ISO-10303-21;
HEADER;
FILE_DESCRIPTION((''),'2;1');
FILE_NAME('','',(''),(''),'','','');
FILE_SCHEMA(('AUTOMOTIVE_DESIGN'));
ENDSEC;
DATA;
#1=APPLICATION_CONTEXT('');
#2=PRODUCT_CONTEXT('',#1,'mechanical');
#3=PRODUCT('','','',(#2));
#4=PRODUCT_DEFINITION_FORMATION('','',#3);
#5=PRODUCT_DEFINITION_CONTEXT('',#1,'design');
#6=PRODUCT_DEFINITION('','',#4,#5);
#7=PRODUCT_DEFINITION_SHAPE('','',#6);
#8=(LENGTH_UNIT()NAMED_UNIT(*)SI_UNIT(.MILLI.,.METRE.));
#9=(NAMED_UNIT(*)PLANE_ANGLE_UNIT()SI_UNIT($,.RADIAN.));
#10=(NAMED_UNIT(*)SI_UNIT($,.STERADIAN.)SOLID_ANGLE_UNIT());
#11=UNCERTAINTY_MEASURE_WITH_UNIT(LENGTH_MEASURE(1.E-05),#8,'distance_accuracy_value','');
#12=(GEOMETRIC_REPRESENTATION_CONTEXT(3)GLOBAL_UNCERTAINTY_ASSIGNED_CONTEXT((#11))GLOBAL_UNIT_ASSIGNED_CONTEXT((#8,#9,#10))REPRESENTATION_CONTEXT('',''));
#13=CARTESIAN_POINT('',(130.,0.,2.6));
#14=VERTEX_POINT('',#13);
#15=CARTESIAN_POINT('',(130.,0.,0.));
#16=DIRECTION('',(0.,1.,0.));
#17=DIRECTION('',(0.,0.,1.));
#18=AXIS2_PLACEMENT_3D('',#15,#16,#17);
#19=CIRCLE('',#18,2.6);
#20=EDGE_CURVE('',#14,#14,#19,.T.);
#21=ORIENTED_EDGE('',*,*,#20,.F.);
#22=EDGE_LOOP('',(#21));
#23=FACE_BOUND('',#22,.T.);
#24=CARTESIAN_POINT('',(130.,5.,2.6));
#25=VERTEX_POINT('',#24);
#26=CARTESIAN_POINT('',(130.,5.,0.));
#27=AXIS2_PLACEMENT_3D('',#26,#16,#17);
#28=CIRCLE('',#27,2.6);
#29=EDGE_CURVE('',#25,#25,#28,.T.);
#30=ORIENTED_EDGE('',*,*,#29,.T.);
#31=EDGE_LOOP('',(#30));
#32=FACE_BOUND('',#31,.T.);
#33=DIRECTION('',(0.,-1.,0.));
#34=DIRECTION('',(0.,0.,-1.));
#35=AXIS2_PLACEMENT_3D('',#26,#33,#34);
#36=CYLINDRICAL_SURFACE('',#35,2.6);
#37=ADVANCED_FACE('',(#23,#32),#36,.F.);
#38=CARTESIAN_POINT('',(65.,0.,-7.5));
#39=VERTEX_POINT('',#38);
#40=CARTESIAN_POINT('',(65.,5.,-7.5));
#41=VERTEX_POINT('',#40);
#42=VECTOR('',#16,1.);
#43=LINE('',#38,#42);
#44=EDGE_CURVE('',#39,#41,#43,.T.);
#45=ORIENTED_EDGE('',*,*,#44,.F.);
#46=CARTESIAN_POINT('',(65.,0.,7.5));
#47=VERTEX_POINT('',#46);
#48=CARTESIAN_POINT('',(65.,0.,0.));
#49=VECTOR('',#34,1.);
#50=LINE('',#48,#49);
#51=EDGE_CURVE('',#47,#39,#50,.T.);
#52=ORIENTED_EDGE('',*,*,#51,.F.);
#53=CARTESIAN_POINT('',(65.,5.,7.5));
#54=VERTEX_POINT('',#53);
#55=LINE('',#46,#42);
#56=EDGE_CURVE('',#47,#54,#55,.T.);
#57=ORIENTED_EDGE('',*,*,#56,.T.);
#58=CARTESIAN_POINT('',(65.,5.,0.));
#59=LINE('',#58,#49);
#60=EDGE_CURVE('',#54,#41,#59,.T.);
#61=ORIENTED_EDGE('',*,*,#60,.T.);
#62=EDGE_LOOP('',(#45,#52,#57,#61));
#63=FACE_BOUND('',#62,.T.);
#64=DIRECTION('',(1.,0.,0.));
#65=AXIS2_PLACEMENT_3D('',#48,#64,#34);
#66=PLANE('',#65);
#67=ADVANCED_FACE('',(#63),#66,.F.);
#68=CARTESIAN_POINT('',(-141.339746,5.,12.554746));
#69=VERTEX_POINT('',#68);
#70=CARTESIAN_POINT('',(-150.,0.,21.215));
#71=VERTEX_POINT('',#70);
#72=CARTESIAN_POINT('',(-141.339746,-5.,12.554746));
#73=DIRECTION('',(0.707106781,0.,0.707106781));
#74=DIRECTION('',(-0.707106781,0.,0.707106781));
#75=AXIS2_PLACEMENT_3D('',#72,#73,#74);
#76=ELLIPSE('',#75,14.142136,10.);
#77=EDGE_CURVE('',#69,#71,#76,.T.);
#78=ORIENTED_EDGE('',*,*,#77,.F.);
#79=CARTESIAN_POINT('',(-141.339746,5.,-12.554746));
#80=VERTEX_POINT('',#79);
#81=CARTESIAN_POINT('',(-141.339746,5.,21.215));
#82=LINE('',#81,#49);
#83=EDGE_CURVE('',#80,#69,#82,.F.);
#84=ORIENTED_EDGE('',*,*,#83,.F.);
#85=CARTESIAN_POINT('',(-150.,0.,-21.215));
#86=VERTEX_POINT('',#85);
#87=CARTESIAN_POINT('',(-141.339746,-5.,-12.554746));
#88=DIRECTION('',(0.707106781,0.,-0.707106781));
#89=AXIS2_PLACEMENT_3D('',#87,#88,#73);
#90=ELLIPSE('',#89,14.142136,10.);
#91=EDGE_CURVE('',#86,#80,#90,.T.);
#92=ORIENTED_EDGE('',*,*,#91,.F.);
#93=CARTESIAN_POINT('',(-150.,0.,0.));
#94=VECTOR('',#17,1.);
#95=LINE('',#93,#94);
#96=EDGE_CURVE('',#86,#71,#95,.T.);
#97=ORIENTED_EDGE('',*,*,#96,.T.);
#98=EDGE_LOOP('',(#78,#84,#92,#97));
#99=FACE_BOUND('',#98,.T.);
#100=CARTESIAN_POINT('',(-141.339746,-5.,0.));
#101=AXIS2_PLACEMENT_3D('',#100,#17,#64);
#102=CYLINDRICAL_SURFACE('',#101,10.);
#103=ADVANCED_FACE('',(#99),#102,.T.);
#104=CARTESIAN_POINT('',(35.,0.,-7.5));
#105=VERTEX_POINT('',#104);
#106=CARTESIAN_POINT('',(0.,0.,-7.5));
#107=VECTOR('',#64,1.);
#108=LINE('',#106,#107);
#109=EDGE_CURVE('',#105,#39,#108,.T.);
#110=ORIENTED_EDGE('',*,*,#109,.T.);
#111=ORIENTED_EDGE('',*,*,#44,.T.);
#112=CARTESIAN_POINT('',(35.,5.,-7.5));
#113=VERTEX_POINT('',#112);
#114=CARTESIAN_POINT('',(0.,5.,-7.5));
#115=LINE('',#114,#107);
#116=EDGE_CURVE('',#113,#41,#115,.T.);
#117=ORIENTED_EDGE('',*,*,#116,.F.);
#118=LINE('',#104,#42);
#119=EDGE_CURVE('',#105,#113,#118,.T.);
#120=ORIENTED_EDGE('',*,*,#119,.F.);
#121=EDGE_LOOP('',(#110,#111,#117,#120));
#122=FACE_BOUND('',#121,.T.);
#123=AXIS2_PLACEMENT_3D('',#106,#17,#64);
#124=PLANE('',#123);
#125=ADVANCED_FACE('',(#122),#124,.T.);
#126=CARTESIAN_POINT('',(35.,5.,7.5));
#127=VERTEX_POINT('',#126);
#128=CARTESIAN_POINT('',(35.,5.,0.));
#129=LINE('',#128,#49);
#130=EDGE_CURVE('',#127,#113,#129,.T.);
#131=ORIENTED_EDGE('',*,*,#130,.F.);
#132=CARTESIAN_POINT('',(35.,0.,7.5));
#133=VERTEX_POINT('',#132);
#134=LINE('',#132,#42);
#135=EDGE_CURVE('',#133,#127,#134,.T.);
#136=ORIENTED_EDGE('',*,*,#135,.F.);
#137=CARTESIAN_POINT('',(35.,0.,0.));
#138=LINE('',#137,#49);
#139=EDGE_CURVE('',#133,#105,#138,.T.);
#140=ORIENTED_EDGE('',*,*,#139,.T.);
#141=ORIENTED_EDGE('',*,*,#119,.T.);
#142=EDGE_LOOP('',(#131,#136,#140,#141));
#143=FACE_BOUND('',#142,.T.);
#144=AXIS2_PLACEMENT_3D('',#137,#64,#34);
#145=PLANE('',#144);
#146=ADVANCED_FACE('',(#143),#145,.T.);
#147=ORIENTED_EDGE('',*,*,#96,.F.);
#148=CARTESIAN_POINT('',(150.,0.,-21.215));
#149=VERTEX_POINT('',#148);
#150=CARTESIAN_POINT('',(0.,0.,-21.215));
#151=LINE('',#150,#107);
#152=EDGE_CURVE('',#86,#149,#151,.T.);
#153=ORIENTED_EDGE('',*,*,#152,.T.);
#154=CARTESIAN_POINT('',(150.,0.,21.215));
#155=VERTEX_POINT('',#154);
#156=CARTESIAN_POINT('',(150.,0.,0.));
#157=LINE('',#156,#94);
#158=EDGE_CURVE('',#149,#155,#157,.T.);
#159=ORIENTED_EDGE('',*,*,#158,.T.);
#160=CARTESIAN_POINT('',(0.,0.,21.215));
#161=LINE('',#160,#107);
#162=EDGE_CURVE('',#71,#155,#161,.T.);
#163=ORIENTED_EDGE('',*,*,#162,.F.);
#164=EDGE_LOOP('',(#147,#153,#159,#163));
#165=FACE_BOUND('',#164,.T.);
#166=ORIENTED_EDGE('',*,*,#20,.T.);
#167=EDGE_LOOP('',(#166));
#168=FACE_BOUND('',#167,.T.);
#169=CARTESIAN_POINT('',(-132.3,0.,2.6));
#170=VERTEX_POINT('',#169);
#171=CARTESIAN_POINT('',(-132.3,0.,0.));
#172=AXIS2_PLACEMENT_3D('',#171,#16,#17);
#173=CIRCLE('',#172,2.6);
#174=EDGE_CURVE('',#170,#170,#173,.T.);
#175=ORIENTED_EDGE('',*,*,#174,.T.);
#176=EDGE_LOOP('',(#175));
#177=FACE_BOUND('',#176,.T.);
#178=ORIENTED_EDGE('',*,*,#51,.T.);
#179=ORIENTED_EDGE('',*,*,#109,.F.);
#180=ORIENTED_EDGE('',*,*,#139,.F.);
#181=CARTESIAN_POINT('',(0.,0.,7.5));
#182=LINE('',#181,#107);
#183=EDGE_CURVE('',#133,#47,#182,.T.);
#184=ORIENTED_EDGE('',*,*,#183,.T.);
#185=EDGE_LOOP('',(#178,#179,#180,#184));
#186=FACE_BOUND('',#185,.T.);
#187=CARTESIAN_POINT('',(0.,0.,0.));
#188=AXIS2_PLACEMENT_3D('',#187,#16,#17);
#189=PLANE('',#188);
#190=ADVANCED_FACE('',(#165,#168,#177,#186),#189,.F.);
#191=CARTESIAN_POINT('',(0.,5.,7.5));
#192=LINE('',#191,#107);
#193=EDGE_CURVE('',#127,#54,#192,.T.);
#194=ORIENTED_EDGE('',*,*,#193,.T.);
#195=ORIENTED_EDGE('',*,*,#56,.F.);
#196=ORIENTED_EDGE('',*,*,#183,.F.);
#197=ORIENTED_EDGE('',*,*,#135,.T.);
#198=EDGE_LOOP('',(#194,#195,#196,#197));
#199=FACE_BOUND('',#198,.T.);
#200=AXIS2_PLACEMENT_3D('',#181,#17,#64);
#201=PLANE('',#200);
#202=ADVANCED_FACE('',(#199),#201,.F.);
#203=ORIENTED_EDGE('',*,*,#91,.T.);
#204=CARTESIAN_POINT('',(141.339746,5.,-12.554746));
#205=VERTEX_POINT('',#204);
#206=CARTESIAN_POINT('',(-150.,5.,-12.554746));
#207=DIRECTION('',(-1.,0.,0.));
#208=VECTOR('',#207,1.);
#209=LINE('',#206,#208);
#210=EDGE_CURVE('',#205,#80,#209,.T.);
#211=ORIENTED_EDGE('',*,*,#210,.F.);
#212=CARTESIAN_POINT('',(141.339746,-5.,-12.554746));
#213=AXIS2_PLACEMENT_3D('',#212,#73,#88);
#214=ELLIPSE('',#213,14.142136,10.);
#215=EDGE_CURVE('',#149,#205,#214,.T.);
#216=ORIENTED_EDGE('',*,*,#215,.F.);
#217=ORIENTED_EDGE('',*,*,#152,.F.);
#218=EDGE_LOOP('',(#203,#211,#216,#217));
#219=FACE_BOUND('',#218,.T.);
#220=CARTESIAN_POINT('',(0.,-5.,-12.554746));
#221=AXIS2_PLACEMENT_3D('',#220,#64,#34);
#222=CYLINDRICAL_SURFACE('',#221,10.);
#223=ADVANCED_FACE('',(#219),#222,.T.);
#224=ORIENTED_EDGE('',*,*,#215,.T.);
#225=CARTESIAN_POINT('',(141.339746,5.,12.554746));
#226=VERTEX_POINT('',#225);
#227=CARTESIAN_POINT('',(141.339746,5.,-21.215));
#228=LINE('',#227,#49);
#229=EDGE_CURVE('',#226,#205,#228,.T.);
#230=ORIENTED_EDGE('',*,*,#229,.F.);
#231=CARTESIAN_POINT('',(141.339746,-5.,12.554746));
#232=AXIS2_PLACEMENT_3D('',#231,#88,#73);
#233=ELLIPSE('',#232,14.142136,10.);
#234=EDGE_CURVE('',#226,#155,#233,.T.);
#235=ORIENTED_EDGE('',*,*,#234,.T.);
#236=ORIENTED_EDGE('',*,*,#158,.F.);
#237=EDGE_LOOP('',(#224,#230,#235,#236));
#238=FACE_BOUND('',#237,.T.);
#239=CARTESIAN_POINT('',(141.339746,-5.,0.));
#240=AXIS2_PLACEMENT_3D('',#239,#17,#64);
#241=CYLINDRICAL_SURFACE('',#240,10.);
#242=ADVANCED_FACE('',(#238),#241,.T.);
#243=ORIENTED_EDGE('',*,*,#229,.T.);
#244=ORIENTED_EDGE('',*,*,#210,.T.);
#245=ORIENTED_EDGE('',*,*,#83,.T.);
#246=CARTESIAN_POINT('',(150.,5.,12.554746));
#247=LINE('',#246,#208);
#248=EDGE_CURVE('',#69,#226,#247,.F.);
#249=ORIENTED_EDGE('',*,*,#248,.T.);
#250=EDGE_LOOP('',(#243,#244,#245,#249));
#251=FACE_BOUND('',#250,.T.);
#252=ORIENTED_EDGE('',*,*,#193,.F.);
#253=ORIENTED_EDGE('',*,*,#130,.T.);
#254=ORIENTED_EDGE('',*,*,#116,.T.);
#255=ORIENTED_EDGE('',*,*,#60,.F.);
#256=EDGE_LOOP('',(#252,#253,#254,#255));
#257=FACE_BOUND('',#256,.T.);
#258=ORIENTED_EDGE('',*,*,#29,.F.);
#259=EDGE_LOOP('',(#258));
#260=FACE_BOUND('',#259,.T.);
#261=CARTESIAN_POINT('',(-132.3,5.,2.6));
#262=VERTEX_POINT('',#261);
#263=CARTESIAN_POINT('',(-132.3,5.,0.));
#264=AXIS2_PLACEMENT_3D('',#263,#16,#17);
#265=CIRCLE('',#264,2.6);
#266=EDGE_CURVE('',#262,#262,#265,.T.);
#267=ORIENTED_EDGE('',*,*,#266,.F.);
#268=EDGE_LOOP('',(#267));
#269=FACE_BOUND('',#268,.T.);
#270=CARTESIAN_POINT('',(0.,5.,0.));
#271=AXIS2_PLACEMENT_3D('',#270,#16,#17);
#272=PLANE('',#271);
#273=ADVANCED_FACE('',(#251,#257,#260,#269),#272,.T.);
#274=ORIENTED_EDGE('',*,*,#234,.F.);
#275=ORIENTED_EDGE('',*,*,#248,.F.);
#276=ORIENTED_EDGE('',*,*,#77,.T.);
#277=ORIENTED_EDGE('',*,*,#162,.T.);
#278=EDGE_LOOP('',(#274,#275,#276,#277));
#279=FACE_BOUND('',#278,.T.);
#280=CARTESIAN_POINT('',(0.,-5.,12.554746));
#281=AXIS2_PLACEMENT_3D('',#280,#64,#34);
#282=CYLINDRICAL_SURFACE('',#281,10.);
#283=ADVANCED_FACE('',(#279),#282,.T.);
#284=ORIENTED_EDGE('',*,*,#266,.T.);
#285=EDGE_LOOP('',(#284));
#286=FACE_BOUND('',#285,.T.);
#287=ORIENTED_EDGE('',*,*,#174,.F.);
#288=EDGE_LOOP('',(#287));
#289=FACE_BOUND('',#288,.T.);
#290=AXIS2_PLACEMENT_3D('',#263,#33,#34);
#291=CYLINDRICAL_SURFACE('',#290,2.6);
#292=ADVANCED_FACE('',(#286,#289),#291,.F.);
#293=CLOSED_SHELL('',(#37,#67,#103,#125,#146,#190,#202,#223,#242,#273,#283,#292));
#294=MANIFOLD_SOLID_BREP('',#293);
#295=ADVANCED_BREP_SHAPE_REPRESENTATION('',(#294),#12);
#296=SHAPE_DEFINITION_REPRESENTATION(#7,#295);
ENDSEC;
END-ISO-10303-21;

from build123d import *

# Parameters (mm, degrees)
SKETCH_1_W          = 21
SKETCH_1_H          = 42.43
SKETCH_1_R          = 2.6
EXTRUDE_1_DEPTH     = 5
FILLET_1_R          = 10
SKETCH_3_W          = 30
SKETCH_3_H          = 7.5
CUT_EXTRUDE_2_DEPTH = 5


with BuildPart() as part:
    # 草图1 → 凸台-拉伸1 (new body)
    # profile 1 of 3: a face of its own
    with BuildSketch(Plane(origin=(0, 0, 0), x_dir=(1, 0, 0), z_dir=(0, 1, 0))):
        with Locations((-139.5, 0)):
            Rectangle(SKETCH_1_W, SKETCH_1_H)
        with Locations(Location((-132.3, 0, 0), (0, 0, 270))):
            Circle(SKETCH_1_R, mode=Mode.SUBTRACT)
    # profile 2 of 3: a face of its own
    with BuildSketch(Plane(origin=(0, 0, 0), x_dir=(1, 0, 0), z_dir=(0, 1, 0))):
        with BuildLine():
            Line((129, 21.215), (-129, 21.215))
            Line((-129, 21.215), (-129, -21.215))
            Line((-129, -21.215), (129, -21.215))
            Line((129, -21.215), (129, -2.4))
            ThreePointArc((129, -2.4), (127.4, 0), (129, 2.4))
            Line((129, 2.4), (129, 21.215))
        make_face()
    # profile 3 of 3: a face of its own
    with BuildSketch(Plane(origin=(0, 0, 0), x_dir=(1, 0, 0), z_dir=(0, 1, 0))):
        with BuildLine():
            Line((150, 21.215), (129, 21.215))
            Line((129, 21.215), (129, 2.4))
            ThreePointArc((129, 2.4), (131.44222051, 2.163330765), (132.6, 0))
            ThreePointArc((132.6, 0), (131.44222051, -2.163330765), (129, -2.4))
            Line((129, -2.4), (129, -21.215))
            Line((129, -21.215), (150, -21.215))
            Line((150, -21.215), (150, 21.215))
        make_face()
    extrude(amount=EXTRUDE_1_DEPTH)

    # 圆角1
    # the kernel refuses this fillet: 10 mm, written as the material it takes off along each edge
    with BuildSketch(Plane(origin=(150, 5, 42.865635095), x_dir=(-1, 0, 0), z_dir=(0, 0, -1)), Plane(origin=(-150, 5, -42.865635095), x_dir=(1, 0, 0), z_dir=(0, 0, 1))) as fillet_1_piece_1:
        with BuildLine():
            CenterArc((8.660254038, -10), FILLET_1_R, 90, 60)
            Line((0, -5), (-0.173205081, -4.9))
            ThreePointArc((-0.173205081, -4.9), (-0.2, -2.5), (-0.2, 0))
            Line((-0.2, 0), (0, 0.2))
            Line((0, 0.2), (8.660254038, 0.2))
            Line((8.660254038, 0.2), (8.660254038, 0))
        make_face()
    extrude(amount=85.731270189, mode=Mode.SUBTRACT)
    with BuildSketch(Plane(origin=(-171.650635095, 5, 21.215), x_dir=(0, 0, -1), z_dir=(1, 0, 0))) as fillet_1_piece_2:
        with BuildLine():
            CenterArc((8.660254038, -10), FILLET_1_R, 90, 60)
            Line((0, -5), (-0.173205081, -4.9))
            ThreePointArc((-0.173205081, -4.9), (-0.2, -2.5), (-0.2, 0))
            Line((-0.2, 0), (0, 0.2))
            Line((0, 0.2), (8.660254038, 0.2))
            Line((8.660254038, 0.2), (8.660254038, 0))
        make_face()
    extrude(amount=343.301270189, mode=Mode.SUBTRACT)
    with BuildSketch(Plane(origin=(-171.650635095, 5, -21.215), x_dir=(0, -1, 0), z_dir=(1, 0, 0))) as fillet_1_piece_3:
        with BuildLine():
            CenterArc((10, -8.660254038), FILLET_1_R, 120, 60)
            Line((0, -8.660254038), (-0.2, -8.660254038))
            Line((-0.2, -8.660254038), (-0.2, 0))
            Line((-0.2, 0), (0, 0.2))
            ThreePointArc((0, 0.2), (2.5, 0.2), (4.9, 0.173205081))
            Line((4.9, 0.173205081), (5, 0))
        make_face()
    extrude(amount=343.301270189, mode=Mode.SUBTRACT)

    # 草图3 → 切除-拉伸2 (cut)
    with BuildSketch(Plane(origin=(0, 5, 0), x_dir=(1, 0, 0), z_dir=(0, 1, 0))):
        with Locations((50, 3.75)):
            Rectangle(SKETCH_3_W, SKETCH_3_H)
        with Locations((50, -3.75)):
            Rectangle(SKETCH_3_W, SKETCH_3_H)
    extrude(amount=-CUT_EXTRUDE_2_DEPTH, mode=Mode.SUBTRACT)


solid = part.part
